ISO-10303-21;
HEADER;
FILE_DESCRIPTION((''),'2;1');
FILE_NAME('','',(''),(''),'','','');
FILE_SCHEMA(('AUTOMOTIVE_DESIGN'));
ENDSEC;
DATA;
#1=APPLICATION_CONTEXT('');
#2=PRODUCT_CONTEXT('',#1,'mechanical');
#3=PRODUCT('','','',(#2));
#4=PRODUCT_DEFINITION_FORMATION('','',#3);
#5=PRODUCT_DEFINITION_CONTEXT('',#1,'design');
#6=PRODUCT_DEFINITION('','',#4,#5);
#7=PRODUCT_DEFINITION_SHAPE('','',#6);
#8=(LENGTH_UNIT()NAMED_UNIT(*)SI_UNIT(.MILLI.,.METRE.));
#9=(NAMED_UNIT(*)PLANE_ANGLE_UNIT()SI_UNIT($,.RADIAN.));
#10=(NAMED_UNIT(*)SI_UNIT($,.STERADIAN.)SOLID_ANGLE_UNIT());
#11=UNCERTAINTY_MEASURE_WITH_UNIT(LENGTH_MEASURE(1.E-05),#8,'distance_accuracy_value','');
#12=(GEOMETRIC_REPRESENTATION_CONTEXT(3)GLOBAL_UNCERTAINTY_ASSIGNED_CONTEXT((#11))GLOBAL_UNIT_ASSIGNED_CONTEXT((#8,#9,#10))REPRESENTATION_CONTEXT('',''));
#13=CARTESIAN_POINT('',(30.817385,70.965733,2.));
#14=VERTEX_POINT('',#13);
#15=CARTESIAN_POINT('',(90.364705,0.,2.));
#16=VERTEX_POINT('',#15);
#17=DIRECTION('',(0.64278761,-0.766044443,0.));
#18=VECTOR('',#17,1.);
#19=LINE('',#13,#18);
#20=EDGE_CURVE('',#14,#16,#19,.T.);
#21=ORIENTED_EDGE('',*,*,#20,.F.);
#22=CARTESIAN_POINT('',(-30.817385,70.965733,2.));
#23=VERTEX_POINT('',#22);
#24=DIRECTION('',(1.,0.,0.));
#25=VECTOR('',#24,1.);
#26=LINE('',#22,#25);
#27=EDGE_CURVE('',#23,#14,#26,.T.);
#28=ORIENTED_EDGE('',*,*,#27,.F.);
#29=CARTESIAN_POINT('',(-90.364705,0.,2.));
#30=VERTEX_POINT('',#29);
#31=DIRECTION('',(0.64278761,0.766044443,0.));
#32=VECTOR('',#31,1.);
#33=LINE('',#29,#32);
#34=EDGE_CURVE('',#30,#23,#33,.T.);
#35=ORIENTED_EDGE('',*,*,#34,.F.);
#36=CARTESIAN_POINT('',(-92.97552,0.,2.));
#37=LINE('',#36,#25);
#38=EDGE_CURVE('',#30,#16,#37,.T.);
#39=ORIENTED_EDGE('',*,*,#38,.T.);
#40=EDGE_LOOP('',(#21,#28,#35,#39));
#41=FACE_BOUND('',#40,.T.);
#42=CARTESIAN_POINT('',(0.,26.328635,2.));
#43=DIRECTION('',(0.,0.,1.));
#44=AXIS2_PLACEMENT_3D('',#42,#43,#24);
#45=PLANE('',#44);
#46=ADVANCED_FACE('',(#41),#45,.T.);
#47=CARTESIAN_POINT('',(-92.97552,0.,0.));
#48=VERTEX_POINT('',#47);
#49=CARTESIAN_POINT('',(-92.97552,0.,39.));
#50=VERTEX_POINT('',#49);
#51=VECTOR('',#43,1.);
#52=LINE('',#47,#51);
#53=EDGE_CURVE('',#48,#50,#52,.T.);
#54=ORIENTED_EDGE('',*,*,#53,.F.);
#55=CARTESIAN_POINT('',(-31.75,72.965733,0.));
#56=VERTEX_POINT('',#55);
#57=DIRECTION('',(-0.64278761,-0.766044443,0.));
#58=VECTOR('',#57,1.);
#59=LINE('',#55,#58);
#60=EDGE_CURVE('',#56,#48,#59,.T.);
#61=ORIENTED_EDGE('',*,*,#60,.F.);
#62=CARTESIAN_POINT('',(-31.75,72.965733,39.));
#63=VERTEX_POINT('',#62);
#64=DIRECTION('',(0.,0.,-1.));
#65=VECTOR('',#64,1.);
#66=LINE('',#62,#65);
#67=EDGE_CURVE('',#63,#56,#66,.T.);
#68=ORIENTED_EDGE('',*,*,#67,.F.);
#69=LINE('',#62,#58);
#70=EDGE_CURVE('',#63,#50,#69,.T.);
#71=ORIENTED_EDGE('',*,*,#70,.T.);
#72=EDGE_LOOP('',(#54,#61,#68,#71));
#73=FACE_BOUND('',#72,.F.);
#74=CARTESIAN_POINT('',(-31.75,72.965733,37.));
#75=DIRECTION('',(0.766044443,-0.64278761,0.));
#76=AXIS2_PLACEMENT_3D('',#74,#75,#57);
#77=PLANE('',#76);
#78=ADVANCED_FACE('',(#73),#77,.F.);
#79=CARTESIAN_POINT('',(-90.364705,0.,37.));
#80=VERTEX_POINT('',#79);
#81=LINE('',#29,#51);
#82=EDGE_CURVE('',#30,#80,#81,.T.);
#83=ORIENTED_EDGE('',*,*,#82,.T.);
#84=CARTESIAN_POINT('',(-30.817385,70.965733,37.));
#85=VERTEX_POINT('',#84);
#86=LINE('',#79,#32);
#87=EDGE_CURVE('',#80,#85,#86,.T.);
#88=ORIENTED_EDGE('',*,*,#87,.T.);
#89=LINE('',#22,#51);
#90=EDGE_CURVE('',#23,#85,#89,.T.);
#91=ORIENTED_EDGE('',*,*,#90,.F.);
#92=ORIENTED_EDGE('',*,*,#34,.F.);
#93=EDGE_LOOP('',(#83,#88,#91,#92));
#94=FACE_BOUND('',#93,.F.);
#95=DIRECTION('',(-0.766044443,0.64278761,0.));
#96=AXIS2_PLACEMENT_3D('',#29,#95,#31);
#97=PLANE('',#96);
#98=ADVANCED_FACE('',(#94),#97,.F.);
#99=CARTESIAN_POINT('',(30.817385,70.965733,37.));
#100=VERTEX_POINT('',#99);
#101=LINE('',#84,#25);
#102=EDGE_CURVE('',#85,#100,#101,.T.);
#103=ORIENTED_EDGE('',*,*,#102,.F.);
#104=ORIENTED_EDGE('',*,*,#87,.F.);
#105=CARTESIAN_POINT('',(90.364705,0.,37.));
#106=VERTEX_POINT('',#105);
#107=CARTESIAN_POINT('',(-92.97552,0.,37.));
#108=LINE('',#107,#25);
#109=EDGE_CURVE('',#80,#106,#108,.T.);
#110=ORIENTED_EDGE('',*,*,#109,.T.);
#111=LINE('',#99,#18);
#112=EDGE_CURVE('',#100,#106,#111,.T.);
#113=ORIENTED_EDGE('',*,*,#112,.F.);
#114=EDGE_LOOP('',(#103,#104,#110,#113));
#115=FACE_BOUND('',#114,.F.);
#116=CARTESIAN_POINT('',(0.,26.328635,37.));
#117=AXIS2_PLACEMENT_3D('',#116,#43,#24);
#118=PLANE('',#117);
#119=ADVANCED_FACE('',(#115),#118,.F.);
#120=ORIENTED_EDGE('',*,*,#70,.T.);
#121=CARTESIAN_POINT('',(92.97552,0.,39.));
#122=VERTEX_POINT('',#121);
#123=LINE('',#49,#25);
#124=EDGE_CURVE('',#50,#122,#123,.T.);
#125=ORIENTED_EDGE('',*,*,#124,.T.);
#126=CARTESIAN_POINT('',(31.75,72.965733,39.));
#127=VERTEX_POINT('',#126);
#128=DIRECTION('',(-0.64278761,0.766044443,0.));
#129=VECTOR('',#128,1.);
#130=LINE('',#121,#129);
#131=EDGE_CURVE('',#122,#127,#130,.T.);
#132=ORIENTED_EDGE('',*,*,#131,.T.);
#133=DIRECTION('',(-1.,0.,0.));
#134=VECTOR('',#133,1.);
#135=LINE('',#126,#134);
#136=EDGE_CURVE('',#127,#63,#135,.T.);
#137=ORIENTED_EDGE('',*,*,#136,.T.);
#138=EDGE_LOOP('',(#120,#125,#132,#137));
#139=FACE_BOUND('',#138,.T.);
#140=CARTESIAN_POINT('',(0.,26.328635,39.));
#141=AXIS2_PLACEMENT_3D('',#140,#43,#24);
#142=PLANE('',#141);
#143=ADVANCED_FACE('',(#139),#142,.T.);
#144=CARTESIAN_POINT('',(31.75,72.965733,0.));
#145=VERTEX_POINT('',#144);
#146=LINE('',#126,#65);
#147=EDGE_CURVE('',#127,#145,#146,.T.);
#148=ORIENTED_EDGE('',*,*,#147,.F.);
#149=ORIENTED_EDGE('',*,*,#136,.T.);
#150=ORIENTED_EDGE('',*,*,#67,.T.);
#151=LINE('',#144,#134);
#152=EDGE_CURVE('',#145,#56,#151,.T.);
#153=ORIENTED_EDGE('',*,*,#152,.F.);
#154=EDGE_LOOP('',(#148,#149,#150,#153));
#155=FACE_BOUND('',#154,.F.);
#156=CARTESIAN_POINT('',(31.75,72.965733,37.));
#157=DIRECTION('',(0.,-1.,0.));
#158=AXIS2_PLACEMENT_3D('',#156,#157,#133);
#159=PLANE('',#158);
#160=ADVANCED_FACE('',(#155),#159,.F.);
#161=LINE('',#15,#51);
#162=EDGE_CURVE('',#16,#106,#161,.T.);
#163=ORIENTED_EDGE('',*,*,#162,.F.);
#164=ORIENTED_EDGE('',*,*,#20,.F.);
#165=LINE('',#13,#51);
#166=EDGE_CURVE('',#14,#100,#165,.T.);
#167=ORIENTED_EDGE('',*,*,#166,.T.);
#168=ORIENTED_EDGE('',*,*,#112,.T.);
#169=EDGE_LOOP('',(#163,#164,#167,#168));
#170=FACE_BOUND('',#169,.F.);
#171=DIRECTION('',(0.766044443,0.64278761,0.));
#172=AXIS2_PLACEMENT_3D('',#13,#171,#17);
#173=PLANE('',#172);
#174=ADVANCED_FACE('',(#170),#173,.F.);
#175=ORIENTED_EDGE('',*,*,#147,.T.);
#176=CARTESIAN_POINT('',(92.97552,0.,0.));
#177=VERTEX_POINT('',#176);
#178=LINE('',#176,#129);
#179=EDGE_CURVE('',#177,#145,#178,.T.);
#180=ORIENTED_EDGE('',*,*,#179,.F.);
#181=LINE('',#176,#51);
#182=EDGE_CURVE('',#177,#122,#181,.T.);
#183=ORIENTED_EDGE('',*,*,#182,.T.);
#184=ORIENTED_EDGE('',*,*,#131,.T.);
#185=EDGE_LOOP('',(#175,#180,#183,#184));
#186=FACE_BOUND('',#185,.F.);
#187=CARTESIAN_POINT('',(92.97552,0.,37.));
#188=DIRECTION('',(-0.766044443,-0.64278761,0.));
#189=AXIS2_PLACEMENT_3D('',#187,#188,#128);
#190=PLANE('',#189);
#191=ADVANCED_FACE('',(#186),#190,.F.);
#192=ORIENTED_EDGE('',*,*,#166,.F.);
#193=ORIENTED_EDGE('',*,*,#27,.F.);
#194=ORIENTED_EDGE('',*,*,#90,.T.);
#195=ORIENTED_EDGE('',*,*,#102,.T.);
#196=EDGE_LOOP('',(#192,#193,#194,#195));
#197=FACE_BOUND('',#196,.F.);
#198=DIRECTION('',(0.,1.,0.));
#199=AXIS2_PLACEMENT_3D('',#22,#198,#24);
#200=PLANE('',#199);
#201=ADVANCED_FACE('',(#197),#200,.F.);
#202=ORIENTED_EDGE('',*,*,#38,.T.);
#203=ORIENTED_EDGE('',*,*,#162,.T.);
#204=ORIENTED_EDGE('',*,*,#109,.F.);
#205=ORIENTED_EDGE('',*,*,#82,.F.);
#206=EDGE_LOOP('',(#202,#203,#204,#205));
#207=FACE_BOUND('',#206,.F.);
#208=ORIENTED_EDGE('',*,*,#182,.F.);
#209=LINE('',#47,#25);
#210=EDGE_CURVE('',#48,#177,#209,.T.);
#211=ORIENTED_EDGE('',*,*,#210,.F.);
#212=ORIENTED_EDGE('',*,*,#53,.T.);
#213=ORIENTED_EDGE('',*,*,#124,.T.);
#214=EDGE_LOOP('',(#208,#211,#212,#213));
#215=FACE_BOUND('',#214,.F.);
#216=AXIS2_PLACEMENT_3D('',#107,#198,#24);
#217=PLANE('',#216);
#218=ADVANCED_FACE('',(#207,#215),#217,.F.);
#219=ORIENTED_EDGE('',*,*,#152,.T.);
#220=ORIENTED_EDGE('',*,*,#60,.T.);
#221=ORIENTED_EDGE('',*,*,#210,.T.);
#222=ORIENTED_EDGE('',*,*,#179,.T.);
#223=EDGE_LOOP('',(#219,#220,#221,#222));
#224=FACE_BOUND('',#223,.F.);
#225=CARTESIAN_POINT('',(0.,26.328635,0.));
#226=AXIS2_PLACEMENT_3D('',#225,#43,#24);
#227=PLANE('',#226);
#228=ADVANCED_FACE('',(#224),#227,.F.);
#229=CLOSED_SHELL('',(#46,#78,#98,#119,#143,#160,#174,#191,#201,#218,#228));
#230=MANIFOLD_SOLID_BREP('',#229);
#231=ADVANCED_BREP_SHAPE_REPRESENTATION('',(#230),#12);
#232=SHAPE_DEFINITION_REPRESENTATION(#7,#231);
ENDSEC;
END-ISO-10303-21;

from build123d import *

# Parameters (mm, degrees)
F1_DEPTH = 2
F3_DEPTH = 35
F5_DEPTH = 2


# Not quite as in the source:
# - a feature names something its author has since deleted; it is built from what else it names


with BuildPart() as f1:
    # F0 (on Top) → F1 (new body)
    with BuildSketch(Plane.XY):
        Polygon((-31.75, 72.9657332071), (-92.9755198226, 0), (92.9755198226, 0), (31.75, 72.9657332071), align=None)
    extrude(amount=F1_DEPTH)

    # F2 (on face) → F3 (join)
    with BuildSketch(Plane.XY.offset(2)):
        Polygon((30.8173846837, 70.9657332071), (90.364705244, 0), (92.9755198226, 0), (31.75, 72.9657332071), (-31.75, 72.9657332071), (-92.9755198226, 0), (-90.364705244, 0), (-30.8173846837, 70.9657332071), align=None)
    extrude(amount=F3_DEPTH)

    # F4 (on face) → F5 (join)
    with BuildSketch(Plane.XY.offset(37)):
        Polygon((-31.75, 72.9657332071), (-92.9755198226, 0), (92.9755198226, 0), (31.75, 72.9657332071), align=None)
    extrude(amount=F5_DEPTH)


solid = f1.part
